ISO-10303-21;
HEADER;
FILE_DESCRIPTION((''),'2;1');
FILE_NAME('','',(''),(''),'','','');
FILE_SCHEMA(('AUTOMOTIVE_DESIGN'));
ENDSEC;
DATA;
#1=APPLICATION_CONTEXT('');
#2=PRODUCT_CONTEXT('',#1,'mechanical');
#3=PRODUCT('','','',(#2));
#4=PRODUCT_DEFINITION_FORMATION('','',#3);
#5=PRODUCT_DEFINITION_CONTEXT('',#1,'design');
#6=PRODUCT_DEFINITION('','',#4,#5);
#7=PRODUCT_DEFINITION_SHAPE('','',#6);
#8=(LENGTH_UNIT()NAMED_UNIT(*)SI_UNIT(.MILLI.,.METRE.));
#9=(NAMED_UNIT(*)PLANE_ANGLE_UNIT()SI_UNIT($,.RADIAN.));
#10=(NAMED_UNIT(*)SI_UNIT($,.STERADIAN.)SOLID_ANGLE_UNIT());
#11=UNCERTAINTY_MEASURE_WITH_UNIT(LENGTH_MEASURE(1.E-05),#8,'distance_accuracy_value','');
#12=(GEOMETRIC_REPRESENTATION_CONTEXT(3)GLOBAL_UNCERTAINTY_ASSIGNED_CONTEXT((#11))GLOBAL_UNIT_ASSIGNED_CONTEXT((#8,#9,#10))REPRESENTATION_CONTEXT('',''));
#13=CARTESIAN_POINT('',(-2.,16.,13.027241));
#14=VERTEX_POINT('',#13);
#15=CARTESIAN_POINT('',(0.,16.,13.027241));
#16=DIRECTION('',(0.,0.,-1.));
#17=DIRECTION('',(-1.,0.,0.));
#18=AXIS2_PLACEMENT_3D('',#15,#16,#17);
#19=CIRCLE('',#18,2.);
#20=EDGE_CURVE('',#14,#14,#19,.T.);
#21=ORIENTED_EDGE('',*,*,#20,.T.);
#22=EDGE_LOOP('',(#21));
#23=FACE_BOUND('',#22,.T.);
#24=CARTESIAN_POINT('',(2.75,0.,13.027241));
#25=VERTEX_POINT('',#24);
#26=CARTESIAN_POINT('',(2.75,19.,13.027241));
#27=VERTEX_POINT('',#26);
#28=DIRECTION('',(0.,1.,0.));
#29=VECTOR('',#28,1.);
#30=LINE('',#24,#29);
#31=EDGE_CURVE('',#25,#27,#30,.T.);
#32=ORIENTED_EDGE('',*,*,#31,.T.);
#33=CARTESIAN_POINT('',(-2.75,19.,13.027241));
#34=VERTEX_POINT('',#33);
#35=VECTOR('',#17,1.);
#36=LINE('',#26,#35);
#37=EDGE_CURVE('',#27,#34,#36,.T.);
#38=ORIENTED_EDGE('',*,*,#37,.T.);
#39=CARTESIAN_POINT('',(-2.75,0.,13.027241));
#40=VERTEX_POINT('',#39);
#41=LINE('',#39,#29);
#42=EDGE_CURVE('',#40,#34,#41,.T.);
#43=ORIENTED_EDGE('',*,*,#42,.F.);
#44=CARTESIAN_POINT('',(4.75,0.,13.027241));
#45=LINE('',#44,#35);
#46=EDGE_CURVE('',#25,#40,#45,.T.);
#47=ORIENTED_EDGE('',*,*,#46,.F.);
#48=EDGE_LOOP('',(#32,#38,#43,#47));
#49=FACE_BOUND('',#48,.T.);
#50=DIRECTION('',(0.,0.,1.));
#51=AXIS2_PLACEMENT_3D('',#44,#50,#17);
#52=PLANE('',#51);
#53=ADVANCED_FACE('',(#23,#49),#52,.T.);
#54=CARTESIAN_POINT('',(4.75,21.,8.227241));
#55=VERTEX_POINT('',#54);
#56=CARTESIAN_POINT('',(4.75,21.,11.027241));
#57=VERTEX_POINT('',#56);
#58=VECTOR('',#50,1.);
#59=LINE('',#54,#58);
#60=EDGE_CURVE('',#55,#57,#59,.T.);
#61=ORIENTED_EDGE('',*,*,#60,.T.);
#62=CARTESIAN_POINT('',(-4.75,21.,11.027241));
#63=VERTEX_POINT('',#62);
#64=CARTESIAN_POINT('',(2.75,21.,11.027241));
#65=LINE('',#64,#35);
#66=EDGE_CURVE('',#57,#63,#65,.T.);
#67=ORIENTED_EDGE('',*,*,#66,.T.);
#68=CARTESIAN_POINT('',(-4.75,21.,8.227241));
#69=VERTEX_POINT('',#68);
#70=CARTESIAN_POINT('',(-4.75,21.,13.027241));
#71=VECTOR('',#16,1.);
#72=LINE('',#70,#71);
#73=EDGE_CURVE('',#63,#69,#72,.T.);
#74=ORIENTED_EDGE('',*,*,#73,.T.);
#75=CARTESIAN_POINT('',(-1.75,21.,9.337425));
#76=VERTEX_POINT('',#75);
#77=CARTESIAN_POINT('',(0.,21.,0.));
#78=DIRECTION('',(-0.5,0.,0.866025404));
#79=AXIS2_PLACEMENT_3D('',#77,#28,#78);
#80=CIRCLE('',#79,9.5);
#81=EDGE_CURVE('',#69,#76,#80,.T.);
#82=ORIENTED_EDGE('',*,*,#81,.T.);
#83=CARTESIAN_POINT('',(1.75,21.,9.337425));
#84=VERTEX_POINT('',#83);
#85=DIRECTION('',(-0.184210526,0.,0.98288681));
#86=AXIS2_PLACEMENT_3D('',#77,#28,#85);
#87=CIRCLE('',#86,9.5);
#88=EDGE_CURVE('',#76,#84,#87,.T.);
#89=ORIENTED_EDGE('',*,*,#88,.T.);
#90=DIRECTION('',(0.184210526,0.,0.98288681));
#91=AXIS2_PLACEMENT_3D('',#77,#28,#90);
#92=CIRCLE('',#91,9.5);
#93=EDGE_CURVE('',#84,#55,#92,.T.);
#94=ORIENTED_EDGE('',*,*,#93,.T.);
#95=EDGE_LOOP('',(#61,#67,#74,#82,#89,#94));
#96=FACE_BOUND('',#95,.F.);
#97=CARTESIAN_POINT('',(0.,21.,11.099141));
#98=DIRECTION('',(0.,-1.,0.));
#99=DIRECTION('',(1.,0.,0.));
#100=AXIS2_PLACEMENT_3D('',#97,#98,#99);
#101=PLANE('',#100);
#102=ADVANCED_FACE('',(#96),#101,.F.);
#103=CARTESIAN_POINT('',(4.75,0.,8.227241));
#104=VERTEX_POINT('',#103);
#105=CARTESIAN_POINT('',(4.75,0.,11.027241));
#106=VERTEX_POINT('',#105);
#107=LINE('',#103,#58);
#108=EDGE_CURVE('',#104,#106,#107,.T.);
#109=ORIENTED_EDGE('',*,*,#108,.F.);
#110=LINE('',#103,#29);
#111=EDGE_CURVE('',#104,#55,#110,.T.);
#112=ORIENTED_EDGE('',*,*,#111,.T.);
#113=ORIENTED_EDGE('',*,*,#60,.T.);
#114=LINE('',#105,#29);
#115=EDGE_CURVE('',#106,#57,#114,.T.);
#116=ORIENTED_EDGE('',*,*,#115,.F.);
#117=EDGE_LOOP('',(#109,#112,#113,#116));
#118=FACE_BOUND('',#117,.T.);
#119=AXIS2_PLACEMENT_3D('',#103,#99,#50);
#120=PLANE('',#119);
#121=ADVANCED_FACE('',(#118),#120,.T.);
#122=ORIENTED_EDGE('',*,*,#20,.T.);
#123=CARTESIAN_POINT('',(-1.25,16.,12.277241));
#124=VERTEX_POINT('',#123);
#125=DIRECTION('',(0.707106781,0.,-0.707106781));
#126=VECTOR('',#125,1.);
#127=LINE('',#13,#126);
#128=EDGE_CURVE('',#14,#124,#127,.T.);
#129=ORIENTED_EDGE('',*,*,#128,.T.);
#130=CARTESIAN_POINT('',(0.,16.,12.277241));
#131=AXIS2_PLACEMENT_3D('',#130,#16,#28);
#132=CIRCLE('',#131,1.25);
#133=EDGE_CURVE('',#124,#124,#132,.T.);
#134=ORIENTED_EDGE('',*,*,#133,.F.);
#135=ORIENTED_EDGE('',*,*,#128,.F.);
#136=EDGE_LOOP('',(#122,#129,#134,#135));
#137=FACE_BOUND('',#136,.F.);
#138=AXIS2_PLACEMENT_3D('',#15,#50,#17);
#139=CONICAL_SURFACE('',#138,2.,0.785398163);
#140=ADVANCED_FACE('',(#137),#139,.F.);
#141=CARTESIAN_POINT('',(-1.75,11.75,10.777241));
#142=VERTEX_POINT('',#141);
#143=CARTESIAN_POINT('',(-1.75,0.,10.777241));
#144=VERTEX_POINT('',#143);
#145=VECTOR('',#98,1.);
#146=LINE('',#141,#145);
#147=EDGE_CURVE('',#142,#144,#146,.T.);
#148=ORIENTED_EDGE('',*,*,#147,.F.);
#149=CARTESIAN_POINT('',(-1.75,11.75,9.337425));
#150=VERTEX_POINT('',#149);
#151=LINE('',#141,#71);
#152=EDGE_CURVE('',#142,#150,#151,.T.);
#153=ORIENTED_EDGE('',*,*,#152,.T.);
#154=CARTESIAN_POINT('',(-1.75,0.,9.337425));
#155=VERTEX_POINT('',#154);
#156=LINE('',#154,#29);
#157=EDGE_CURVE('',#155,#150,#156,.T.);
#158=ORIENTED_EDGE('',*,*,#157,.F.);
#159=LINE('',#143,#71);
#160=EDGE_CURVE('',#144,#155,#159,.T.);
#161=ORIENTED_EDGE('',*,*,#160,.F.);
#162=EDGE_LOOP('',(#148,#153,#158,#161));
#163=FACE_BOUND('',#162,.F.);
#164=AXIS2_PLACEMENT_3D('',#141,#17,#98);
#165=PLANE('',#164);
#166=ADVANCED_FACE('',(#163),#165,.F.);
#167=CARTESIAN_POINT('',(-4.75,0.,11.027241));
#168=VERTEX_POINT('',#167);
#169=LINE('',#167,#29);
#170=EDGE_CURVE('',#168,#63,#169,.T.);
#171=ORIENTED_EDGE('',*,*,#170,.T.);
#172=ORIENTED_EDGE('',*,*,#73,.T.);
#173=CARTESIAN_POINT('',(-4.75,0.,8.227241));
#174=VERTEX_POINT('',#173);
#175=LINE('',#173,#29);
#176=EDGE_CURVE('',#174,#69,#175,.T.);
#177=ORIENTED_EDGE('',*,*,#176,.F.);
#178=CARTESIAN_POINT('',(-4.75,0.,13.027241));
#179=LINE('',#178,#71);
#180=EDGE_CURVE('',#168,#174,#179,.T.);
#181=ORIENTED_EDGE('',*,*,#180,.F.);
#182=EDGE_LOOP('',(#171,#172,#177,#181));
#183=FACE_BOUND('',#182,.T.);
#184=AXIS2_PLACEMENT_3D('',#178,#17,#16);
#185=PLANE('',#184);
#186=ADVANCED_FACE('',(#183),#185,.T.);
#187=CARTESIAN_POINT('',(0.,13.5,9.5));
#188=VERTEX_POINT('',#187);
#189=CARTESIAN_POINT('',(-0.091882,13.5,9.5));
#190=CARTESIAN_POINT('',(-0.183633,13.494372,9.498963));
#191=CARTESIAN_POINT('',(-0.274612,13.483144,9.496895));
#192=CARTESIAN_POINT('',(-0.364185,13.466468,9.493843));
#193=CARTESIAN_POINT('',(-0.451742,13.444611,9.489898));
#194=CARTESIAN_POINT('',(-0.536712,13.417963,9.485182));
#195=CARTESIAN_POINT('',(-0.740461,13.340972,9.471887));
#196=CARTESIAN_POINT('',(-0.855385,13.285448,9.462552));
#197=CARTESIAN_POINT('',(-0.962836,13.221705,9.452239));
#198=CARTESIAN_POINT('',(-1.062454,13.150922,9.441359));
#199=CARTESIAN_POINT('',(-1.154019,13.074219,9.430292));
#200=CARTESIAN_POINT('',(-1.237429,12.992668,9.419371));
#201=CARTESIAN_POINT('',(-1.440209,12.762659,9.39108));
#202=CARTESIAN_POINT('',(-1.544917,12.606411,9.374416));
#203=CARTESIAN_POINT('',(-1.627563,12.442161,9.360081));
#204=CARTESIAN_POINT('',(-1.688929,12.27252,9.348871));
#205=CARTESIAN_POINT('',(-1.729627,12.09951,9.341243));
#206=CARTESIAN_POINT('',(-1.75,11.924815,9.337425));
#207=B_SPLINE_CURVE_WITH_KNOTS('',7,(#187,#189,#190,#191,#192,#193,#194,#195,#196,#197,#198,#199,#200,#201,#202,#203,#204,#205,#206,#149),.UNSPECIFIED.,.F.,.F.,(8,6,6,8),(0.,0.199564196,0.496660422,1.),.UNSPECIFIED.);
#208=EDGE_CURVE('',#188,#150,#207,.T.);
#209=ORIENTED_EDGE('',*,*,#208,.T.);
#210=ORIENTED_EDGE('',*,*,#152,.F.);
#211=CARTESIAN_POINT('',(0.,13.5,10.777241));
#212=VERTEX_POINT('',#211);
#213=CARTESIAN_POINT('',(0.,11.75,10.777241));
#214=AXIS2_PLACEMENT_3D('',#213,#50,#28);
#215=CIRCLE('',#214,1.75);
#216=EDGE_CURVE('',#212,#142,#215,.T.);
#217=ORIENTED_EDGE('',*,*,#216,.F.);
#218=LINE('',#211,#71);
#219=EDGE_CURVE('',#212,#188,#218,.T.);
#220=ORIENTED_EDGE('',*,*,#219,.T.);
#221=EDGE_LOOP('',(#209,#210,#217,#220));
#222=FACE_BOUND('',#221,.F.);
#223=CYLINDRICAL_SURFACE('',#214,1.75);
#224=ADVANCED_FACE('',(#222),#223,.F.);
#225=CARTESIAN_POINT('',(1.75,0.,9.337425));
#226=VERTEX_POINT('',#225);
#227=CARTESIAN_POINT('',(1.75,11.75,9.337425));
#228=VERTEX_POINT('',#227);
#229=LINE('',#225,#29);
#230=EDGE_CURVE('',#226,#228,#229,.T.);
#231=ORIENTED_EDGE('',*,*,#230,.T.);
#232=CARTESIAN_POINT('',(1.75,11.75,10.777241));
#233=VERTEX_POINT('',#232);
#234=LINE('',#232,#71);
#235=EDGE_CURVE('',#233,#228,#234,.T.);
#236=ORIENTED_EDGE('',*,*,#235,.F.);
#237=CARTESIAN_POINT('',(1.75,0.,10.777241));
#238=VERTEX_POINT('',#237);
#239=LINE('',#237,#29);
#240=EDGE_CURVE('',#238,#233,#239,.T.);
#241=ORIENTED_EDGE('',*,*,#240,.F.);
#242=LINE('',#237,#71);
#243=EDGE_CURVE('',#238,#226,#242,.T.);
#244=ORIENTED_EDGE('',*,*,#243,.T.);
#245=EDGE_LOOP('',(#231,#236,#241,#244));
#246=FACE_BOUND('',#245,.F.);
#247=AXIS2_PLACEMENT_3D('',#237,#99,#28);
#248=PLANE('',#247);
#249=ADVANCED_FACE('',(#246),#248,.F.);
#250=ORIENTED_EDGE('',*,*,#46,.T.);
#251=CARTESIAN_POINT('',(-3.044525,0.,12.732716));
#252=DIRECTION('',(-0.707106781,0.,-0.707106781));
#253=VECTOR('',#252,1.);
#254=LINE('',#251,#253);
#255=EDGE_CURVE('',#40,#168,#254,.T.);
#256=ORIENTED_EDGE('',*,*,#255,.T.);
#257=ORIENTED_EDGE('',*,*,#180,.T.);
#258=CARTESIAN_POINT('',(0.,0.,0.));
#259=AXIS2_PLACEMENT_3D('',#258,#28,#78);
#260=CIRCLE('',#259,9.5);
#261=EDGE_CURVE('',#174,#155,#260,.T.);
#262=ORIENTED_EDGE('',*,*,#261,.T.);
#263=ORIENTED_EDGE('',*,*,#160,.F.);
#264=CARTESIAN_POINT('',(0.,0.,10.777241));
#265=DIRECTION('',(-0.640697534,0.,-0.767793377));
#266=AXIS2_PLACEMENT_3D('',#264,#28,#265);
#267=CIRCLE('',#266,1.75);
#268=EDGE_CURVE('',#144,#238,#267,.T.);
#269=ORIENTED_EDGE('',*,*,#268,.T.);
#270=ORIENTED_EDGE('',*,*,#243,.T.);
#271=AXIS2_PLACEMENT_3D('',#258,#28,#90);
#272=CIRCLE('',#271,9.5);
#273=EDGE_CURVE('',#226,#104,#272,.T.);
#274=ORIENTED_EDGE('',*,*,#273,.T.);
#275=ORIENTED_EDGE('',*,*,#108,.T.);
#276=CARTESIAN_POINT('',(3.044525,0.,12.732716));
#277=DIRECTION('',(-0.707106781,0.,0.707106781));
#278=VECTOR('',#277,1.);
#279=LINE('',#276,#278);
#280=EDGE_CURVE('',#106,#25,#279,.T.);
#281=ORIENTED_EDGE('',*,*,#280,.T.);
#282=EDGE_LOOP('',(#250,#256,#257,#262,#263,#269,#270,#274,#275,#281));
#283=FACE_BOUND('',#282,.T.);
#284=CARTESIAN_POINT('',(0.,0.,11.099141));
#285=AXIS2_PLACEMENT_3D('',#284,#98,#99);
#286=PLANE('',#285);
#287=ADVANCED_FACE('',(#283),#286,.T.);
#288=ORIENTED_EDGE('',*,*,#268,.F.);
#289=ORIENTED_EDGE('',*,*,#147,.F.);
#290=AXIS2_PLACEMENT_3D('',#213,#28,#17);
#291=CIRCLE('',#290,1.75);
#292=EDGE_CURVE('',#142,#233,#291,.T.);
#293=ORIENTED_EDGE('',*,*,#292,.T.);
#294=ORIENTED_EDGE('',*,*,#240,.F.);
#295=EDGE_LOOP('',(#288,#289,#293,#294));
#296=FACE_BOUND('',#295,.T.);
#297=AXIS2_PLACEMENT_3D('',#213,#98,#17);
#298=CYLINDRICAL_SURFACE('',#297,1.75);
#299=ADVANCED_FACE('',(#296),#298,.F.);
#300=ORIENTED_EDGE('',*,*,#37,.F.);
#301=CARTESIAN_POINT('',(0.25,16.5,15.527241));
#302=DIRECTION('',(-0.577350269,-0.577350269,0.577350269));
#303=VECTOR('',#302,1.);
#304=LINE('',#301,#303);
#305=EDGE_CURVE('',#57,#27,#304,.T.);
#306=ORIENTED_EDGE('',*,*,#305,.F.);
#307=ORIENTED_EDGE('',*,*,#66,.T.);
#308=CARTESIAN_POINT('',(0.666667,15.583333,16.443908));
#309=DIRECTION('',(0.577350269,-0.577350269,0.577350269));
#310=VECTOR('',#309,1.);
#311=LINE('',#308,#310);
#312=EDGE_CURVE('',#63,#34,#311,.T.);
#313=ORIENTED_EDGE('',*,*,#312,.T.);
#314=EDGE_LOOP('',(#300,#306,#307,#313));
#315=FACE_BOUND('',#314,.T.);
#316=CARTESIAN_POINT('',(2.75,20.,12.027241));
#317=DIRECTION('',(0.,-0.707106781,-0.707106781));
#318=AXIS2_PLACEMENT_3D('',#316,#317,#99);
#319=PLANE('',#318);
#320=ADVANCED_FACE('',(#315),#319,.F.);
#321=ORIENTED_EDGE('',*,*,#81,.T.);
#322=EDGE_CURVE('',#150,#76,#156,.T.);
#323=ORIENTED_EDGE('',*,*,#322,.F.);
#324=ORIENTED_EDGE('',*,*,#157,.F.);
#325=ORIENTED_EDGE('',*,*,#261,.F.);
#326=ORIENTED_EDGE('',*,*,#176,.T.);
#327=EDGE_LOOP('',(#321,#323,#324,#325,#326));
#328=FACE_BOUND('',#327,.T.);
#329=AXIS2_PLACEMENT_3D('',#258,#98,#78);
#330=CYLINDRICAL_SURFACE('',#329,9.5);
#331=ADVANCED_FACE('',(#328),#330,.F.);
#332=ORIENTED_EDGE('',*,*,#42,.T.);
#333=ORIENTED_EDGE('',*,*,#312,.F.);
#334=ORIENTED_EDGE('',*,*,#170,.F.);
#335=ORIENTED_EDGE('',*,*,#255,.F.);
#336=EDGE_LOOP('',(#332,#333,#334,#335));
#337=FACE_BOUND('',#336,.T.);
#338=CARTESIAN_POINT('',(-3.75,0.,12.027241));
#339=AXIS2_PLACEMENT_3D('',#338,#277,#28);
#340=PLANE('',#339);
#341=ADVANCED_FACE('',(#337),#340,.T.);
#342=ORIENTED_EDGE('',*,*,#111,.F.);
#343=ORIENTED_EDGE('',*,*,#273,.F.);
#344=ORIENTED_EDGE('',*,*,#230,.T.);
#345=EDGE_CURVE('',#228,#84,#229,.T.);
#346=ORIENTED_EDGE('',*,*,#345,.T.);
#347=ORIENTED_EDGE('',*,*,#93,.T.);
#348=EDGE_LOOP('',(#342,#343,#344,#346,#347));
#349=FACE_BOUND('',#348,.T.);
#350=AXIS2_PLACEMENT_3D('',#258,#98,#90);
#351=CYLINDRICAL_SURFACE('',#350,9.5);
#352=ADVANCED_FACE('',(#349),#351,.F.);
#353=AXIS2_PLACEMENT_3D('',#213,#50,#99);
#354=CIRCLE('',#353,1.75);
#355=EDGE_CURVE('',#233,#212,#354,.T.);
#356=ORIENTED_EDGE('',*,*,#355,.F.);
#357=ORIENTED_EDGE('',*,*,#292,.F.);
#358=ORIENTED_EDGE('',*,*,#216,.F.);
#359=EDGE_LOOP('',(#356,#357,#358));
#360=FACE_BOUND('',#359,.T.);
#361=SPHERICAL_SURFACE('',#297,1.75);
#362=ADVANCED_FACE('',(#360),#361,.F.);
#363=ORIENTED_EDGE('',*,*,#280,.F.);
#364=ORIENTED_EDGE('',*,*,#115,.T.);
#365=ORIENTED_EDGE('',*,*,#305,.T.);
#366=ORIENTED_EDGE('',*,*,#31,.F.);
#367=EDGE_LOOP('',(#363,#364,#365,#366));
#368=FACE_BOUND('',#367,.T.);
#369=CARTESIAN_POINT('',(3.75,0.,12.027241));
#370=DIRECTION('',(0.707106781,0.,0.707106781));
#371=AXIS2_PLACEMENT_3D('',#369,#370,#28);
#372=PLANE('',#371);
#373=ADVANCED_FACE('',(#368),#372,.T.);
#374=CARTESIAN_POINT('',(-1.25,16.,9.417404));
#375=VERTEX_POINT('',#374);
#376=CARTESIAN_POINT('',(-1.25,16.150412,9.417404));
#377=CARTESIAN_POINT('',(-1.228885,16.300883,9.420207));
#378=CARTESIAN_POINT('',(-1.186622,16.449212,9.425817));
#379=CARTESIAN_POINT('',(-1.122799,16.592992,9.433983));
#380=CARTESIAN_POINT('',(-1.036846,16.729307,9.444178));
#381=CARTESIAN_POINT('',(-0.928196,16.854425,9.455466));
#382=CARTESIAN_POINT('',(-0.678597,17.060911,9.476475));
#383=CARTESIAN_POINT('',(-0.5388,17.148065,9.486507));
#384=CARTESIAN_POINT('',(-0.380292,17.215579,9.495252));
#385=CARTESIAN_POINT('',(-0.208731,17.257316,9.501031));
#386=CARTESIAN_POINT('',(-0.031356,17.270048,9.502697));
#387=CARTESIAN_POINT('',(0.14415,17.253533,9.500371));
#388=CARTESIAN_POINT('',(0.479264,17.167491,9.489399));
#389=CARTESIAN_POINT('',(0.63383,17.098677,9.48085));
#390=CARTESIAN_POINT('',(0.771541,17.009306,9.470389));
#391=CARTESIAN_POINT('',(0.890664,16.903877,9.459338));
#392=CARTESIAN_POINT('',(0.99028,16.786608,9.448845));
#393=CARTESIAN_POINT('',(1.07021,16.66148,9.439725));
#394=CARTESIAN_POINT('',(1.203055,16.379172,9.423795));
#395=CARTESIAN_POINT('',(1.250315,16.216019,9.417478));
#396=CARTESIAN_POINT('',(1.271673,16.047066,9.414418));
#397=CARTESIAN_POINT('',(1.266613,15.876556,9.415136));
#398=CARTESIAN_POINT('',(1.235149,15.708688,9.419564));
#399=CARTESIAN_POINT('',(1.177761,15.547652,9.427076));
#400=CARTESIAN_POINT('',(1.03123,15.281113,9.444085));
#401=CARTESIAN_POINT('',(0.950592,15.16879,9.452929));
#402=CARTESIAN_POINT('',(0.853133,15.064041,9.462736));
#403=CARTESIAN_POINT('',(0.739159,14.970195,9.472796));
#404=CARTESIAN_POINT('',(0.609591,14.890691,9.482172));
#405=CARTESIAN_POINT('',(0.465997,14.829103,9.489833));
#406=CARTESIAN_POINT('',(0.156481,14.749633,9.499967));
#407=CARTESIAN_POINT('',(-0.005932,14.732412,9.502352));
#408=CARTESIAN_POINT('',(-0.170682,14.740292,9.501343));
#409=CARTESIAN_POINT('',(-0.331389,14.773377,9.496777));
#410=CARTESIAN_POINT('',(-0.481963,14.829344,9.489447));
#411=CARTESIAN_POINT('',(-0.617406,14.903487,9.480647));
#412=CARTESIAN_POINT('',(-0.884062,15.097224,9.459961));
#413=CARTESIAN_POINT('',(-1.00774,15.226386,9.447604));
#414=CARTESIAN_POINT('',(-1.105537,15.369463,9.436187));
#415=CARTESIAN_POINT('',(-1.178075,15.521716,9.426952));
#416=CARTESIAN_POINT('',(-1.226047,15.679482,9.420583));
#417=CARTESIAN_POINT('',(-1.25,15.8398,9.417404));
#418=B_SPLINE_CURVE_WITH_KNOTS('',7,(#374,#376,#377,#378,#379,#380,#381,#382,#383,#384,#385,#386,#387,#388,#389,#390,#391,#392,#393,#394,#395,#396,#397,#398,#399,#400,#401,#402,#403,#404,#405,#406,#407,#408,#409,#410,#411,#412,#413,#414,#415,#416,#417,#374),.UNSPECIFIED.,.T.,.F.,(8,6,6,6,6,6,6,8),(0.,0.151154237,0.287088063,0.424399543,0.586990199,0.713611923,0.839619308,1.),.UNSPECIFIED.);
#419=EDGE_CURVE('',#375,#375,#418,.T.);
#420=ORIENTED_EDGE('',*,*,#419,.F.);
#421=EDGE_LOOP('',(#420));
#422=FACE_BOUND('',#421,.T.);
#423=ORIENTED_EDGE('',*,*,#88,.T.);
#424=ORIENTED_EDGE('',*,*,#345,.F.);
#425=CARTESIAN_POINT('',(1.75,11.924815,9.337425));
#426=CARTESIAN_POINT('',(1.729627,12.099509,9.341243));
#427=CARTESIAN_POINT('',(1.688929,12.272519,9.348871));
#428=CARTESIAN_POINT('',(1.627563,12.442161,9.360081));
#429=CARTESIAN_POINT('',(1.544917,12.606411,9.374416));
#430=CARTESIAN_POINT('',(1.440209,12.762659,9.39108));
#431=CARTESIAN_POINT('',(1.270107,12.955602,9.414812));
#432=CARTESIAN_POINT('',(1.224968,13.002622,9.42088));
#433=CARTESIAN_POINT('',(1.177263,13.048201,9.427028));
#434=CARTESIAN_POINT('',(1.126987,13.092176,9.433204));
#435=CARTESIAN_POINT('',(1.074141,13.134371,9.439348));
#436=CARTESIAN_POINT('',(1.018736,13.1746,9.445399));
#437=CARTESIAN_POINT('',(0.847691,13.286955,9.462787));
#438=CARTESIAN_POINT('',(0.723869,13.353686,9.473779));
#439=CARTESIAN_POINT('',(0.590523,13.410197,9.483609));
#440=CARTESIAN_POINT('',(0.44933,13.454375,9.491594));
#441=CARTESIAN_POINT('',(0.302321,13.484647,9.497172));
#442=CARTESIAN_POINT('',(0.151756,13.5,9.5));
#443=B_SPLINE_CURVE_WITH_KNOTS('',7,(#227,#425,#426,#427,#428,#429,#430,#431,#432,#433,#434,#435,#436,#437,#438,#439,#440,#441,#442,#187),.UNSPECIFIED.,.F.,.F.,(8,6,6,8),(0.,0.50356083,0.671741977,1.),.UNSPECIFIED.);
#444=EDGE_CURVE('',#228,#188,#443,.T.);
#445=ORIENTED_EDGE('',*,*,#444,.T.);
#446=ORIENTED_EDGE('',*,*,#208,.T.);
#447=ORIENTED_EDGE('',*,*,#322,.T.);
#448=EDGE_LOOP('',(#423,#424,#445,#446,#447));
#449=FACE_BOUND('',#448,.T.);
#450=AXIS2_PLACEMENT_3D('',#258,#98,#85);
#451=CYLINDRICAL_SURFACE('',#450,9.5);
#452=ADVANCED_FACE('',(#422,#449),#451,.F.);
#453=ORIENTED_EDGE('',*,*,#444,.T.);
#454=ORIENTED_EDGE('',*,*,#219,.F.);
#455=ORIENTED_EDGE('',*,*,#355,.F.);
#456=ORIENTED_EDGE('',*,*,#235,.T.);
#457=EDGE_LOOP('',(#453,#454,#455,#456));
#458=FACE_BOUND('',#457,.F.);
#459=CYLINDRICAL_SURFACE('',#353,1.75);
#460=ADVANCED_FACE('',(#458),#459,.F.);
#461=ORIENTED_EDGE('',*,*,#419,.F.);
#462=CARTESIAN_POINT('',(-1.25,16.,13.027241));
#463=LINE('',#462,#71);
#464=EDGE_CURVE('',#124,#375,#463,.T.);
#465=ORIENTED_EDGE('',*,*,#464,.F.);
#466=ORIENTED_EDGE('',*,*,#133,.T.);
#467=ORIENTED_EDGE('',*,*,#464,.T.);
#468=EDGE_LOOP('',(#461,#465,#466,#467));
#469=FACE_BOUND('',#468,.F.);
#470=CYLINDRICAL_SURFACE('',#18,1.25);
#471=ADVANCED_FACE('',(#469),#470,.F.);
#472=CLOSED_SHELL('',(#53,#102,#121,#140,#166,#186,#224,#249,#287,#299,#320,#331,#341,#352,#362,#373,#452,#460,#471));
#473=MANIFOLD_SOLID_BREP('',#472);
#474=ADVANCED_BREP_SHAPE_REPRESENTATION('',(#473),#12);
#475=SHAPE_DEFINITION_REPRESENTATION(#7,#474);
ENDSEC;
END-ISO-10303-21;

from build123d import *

# Parameters (mm, degrees)
F6_DEPTH        = 21
F7_SIZE         = 2
F8_SIZE         = 2
F12_DEPTH       = 2.5510001
F14_D           = 2.5
F14_CSINK_D     = 4
F14_CSINK_ANGLE = 90


# Not quite as in the source:
# - a feature names something its author has since deleted; it is built from what else it names


with BuildPart() as f6:
    # F5 (on Front) → F6 (new body)
    with BuildSketch(Plane.XZ):
        with BuildLine():
            ThreePointArc((1.75, 9.3374246985), (3.2970633562, 8.9095102685), (4.75, 8.227241336))
            Line((4.75, 8.227241336), (4.75, 13.027241336))
            Line((4.75, 13.027241336), (-4.75, 13.027241336))
            Line((-4.75, 13.027241336), (-4.75, 8.227241336))
            ThreePointArc((-4.75, 8.227241336), (-3.2970633562, 8.9095102685), (-1.75, 9.3374246985))
            Line((-1.75, 9.3374246985), (-1.75, 10.777241336))
            ThreePointArc((-1.75, 10.777241336), (0, 12.527241336), (1.75, 10.777241336))
            Line((1.75, 10.777241336), (1.75, 9.3374246985))
        make_face()
        with BuildLine():
            ThreePointArc((-1.75, 9.3374246985), (0, 9.5), (1.75, 9.3374246985))
            Line((1.75, 9.3374246985), (1.75, 10.777241336))
            ThreePointArc((1.75, 10.777241336), (0, 12.527241336), (-1.75, 10.777241336))
            Line((-1.75, 10.777241336), (-1.75, 9.3374246985))
        make_face()
    extrude(amount=-F6_DEPTH)

    # F7
    f7_edges = [f6.edges().sort_by_distance(p)[0] for p in [
        (-4.75, 10.5, 13.027241),
        (4.75, 10.5, 13.027241),
    ]]
    chamfer(f7_edges, length=F7_SIZE)

    # F8
    f8_edges = [f6.edges().sort_by_distance(p)[0] for p in [
        (0, 21, 13.027241),
    ]]
    chamfer(f8_edges, length=F8_SIZE)

    # F10 (on offset) → F11 (revolve, cut)
    with BuildSketch(Plane.XY.offset(10.777241336)):
        with BuildLine():
            Line((-1.75, 11.75), (-1.75, 0))
            Line((-1.75, 0), (0, 0))
            Line((0, 0), (0, 13.5))
            ThreePointArc((0, 13.5), (-1.2374368671, 12.9874368671), (-1.75, 11.75))
        make_face()
    revolve(axis=Axis((0, 6.75, 10.777241336), (0, 1, 0)), mode=Mode.SUBTRACT)

    # F10 (on offset) → F12 (cut, through all)
    with BuildSketch(Plane.XY.offset(10.777241336)):
        with BuildLine():
            Line((0, 13.5), (0, 0))
            Line((0, 0), (1.75, 0))
            Line((1.75, 0), (1.75, 11.75))
            ThreePointArc((1.75, 11.75), (1.2374368671, 12.9874368671), (0, 13.5))
        make_face()
        with BuildLine():
            Line((-1.75, 11.75), (-1.75, 0))
            Line((-1.75, 0), (0, 0))
            Line((0, 0), (0, 13.5))
            ThreePointArc((0, 13.5), (-1.2374368671, 12.9874368671), (-1.75, 11.75))
        make_face()
    extrude(amount=-F12_DEPTH, mode=Mode.SUBTRACT)

    # F14 (through all)
    with Locations(Plane.XY.offset(13.027241336)):
        with Locations((0, 16)):
            CounterSinkHole(F14_D / 2, F14_CSINK_D / 2, counter_sink_angle=F14_CSINK_ANGLE)


solid = f6.part
